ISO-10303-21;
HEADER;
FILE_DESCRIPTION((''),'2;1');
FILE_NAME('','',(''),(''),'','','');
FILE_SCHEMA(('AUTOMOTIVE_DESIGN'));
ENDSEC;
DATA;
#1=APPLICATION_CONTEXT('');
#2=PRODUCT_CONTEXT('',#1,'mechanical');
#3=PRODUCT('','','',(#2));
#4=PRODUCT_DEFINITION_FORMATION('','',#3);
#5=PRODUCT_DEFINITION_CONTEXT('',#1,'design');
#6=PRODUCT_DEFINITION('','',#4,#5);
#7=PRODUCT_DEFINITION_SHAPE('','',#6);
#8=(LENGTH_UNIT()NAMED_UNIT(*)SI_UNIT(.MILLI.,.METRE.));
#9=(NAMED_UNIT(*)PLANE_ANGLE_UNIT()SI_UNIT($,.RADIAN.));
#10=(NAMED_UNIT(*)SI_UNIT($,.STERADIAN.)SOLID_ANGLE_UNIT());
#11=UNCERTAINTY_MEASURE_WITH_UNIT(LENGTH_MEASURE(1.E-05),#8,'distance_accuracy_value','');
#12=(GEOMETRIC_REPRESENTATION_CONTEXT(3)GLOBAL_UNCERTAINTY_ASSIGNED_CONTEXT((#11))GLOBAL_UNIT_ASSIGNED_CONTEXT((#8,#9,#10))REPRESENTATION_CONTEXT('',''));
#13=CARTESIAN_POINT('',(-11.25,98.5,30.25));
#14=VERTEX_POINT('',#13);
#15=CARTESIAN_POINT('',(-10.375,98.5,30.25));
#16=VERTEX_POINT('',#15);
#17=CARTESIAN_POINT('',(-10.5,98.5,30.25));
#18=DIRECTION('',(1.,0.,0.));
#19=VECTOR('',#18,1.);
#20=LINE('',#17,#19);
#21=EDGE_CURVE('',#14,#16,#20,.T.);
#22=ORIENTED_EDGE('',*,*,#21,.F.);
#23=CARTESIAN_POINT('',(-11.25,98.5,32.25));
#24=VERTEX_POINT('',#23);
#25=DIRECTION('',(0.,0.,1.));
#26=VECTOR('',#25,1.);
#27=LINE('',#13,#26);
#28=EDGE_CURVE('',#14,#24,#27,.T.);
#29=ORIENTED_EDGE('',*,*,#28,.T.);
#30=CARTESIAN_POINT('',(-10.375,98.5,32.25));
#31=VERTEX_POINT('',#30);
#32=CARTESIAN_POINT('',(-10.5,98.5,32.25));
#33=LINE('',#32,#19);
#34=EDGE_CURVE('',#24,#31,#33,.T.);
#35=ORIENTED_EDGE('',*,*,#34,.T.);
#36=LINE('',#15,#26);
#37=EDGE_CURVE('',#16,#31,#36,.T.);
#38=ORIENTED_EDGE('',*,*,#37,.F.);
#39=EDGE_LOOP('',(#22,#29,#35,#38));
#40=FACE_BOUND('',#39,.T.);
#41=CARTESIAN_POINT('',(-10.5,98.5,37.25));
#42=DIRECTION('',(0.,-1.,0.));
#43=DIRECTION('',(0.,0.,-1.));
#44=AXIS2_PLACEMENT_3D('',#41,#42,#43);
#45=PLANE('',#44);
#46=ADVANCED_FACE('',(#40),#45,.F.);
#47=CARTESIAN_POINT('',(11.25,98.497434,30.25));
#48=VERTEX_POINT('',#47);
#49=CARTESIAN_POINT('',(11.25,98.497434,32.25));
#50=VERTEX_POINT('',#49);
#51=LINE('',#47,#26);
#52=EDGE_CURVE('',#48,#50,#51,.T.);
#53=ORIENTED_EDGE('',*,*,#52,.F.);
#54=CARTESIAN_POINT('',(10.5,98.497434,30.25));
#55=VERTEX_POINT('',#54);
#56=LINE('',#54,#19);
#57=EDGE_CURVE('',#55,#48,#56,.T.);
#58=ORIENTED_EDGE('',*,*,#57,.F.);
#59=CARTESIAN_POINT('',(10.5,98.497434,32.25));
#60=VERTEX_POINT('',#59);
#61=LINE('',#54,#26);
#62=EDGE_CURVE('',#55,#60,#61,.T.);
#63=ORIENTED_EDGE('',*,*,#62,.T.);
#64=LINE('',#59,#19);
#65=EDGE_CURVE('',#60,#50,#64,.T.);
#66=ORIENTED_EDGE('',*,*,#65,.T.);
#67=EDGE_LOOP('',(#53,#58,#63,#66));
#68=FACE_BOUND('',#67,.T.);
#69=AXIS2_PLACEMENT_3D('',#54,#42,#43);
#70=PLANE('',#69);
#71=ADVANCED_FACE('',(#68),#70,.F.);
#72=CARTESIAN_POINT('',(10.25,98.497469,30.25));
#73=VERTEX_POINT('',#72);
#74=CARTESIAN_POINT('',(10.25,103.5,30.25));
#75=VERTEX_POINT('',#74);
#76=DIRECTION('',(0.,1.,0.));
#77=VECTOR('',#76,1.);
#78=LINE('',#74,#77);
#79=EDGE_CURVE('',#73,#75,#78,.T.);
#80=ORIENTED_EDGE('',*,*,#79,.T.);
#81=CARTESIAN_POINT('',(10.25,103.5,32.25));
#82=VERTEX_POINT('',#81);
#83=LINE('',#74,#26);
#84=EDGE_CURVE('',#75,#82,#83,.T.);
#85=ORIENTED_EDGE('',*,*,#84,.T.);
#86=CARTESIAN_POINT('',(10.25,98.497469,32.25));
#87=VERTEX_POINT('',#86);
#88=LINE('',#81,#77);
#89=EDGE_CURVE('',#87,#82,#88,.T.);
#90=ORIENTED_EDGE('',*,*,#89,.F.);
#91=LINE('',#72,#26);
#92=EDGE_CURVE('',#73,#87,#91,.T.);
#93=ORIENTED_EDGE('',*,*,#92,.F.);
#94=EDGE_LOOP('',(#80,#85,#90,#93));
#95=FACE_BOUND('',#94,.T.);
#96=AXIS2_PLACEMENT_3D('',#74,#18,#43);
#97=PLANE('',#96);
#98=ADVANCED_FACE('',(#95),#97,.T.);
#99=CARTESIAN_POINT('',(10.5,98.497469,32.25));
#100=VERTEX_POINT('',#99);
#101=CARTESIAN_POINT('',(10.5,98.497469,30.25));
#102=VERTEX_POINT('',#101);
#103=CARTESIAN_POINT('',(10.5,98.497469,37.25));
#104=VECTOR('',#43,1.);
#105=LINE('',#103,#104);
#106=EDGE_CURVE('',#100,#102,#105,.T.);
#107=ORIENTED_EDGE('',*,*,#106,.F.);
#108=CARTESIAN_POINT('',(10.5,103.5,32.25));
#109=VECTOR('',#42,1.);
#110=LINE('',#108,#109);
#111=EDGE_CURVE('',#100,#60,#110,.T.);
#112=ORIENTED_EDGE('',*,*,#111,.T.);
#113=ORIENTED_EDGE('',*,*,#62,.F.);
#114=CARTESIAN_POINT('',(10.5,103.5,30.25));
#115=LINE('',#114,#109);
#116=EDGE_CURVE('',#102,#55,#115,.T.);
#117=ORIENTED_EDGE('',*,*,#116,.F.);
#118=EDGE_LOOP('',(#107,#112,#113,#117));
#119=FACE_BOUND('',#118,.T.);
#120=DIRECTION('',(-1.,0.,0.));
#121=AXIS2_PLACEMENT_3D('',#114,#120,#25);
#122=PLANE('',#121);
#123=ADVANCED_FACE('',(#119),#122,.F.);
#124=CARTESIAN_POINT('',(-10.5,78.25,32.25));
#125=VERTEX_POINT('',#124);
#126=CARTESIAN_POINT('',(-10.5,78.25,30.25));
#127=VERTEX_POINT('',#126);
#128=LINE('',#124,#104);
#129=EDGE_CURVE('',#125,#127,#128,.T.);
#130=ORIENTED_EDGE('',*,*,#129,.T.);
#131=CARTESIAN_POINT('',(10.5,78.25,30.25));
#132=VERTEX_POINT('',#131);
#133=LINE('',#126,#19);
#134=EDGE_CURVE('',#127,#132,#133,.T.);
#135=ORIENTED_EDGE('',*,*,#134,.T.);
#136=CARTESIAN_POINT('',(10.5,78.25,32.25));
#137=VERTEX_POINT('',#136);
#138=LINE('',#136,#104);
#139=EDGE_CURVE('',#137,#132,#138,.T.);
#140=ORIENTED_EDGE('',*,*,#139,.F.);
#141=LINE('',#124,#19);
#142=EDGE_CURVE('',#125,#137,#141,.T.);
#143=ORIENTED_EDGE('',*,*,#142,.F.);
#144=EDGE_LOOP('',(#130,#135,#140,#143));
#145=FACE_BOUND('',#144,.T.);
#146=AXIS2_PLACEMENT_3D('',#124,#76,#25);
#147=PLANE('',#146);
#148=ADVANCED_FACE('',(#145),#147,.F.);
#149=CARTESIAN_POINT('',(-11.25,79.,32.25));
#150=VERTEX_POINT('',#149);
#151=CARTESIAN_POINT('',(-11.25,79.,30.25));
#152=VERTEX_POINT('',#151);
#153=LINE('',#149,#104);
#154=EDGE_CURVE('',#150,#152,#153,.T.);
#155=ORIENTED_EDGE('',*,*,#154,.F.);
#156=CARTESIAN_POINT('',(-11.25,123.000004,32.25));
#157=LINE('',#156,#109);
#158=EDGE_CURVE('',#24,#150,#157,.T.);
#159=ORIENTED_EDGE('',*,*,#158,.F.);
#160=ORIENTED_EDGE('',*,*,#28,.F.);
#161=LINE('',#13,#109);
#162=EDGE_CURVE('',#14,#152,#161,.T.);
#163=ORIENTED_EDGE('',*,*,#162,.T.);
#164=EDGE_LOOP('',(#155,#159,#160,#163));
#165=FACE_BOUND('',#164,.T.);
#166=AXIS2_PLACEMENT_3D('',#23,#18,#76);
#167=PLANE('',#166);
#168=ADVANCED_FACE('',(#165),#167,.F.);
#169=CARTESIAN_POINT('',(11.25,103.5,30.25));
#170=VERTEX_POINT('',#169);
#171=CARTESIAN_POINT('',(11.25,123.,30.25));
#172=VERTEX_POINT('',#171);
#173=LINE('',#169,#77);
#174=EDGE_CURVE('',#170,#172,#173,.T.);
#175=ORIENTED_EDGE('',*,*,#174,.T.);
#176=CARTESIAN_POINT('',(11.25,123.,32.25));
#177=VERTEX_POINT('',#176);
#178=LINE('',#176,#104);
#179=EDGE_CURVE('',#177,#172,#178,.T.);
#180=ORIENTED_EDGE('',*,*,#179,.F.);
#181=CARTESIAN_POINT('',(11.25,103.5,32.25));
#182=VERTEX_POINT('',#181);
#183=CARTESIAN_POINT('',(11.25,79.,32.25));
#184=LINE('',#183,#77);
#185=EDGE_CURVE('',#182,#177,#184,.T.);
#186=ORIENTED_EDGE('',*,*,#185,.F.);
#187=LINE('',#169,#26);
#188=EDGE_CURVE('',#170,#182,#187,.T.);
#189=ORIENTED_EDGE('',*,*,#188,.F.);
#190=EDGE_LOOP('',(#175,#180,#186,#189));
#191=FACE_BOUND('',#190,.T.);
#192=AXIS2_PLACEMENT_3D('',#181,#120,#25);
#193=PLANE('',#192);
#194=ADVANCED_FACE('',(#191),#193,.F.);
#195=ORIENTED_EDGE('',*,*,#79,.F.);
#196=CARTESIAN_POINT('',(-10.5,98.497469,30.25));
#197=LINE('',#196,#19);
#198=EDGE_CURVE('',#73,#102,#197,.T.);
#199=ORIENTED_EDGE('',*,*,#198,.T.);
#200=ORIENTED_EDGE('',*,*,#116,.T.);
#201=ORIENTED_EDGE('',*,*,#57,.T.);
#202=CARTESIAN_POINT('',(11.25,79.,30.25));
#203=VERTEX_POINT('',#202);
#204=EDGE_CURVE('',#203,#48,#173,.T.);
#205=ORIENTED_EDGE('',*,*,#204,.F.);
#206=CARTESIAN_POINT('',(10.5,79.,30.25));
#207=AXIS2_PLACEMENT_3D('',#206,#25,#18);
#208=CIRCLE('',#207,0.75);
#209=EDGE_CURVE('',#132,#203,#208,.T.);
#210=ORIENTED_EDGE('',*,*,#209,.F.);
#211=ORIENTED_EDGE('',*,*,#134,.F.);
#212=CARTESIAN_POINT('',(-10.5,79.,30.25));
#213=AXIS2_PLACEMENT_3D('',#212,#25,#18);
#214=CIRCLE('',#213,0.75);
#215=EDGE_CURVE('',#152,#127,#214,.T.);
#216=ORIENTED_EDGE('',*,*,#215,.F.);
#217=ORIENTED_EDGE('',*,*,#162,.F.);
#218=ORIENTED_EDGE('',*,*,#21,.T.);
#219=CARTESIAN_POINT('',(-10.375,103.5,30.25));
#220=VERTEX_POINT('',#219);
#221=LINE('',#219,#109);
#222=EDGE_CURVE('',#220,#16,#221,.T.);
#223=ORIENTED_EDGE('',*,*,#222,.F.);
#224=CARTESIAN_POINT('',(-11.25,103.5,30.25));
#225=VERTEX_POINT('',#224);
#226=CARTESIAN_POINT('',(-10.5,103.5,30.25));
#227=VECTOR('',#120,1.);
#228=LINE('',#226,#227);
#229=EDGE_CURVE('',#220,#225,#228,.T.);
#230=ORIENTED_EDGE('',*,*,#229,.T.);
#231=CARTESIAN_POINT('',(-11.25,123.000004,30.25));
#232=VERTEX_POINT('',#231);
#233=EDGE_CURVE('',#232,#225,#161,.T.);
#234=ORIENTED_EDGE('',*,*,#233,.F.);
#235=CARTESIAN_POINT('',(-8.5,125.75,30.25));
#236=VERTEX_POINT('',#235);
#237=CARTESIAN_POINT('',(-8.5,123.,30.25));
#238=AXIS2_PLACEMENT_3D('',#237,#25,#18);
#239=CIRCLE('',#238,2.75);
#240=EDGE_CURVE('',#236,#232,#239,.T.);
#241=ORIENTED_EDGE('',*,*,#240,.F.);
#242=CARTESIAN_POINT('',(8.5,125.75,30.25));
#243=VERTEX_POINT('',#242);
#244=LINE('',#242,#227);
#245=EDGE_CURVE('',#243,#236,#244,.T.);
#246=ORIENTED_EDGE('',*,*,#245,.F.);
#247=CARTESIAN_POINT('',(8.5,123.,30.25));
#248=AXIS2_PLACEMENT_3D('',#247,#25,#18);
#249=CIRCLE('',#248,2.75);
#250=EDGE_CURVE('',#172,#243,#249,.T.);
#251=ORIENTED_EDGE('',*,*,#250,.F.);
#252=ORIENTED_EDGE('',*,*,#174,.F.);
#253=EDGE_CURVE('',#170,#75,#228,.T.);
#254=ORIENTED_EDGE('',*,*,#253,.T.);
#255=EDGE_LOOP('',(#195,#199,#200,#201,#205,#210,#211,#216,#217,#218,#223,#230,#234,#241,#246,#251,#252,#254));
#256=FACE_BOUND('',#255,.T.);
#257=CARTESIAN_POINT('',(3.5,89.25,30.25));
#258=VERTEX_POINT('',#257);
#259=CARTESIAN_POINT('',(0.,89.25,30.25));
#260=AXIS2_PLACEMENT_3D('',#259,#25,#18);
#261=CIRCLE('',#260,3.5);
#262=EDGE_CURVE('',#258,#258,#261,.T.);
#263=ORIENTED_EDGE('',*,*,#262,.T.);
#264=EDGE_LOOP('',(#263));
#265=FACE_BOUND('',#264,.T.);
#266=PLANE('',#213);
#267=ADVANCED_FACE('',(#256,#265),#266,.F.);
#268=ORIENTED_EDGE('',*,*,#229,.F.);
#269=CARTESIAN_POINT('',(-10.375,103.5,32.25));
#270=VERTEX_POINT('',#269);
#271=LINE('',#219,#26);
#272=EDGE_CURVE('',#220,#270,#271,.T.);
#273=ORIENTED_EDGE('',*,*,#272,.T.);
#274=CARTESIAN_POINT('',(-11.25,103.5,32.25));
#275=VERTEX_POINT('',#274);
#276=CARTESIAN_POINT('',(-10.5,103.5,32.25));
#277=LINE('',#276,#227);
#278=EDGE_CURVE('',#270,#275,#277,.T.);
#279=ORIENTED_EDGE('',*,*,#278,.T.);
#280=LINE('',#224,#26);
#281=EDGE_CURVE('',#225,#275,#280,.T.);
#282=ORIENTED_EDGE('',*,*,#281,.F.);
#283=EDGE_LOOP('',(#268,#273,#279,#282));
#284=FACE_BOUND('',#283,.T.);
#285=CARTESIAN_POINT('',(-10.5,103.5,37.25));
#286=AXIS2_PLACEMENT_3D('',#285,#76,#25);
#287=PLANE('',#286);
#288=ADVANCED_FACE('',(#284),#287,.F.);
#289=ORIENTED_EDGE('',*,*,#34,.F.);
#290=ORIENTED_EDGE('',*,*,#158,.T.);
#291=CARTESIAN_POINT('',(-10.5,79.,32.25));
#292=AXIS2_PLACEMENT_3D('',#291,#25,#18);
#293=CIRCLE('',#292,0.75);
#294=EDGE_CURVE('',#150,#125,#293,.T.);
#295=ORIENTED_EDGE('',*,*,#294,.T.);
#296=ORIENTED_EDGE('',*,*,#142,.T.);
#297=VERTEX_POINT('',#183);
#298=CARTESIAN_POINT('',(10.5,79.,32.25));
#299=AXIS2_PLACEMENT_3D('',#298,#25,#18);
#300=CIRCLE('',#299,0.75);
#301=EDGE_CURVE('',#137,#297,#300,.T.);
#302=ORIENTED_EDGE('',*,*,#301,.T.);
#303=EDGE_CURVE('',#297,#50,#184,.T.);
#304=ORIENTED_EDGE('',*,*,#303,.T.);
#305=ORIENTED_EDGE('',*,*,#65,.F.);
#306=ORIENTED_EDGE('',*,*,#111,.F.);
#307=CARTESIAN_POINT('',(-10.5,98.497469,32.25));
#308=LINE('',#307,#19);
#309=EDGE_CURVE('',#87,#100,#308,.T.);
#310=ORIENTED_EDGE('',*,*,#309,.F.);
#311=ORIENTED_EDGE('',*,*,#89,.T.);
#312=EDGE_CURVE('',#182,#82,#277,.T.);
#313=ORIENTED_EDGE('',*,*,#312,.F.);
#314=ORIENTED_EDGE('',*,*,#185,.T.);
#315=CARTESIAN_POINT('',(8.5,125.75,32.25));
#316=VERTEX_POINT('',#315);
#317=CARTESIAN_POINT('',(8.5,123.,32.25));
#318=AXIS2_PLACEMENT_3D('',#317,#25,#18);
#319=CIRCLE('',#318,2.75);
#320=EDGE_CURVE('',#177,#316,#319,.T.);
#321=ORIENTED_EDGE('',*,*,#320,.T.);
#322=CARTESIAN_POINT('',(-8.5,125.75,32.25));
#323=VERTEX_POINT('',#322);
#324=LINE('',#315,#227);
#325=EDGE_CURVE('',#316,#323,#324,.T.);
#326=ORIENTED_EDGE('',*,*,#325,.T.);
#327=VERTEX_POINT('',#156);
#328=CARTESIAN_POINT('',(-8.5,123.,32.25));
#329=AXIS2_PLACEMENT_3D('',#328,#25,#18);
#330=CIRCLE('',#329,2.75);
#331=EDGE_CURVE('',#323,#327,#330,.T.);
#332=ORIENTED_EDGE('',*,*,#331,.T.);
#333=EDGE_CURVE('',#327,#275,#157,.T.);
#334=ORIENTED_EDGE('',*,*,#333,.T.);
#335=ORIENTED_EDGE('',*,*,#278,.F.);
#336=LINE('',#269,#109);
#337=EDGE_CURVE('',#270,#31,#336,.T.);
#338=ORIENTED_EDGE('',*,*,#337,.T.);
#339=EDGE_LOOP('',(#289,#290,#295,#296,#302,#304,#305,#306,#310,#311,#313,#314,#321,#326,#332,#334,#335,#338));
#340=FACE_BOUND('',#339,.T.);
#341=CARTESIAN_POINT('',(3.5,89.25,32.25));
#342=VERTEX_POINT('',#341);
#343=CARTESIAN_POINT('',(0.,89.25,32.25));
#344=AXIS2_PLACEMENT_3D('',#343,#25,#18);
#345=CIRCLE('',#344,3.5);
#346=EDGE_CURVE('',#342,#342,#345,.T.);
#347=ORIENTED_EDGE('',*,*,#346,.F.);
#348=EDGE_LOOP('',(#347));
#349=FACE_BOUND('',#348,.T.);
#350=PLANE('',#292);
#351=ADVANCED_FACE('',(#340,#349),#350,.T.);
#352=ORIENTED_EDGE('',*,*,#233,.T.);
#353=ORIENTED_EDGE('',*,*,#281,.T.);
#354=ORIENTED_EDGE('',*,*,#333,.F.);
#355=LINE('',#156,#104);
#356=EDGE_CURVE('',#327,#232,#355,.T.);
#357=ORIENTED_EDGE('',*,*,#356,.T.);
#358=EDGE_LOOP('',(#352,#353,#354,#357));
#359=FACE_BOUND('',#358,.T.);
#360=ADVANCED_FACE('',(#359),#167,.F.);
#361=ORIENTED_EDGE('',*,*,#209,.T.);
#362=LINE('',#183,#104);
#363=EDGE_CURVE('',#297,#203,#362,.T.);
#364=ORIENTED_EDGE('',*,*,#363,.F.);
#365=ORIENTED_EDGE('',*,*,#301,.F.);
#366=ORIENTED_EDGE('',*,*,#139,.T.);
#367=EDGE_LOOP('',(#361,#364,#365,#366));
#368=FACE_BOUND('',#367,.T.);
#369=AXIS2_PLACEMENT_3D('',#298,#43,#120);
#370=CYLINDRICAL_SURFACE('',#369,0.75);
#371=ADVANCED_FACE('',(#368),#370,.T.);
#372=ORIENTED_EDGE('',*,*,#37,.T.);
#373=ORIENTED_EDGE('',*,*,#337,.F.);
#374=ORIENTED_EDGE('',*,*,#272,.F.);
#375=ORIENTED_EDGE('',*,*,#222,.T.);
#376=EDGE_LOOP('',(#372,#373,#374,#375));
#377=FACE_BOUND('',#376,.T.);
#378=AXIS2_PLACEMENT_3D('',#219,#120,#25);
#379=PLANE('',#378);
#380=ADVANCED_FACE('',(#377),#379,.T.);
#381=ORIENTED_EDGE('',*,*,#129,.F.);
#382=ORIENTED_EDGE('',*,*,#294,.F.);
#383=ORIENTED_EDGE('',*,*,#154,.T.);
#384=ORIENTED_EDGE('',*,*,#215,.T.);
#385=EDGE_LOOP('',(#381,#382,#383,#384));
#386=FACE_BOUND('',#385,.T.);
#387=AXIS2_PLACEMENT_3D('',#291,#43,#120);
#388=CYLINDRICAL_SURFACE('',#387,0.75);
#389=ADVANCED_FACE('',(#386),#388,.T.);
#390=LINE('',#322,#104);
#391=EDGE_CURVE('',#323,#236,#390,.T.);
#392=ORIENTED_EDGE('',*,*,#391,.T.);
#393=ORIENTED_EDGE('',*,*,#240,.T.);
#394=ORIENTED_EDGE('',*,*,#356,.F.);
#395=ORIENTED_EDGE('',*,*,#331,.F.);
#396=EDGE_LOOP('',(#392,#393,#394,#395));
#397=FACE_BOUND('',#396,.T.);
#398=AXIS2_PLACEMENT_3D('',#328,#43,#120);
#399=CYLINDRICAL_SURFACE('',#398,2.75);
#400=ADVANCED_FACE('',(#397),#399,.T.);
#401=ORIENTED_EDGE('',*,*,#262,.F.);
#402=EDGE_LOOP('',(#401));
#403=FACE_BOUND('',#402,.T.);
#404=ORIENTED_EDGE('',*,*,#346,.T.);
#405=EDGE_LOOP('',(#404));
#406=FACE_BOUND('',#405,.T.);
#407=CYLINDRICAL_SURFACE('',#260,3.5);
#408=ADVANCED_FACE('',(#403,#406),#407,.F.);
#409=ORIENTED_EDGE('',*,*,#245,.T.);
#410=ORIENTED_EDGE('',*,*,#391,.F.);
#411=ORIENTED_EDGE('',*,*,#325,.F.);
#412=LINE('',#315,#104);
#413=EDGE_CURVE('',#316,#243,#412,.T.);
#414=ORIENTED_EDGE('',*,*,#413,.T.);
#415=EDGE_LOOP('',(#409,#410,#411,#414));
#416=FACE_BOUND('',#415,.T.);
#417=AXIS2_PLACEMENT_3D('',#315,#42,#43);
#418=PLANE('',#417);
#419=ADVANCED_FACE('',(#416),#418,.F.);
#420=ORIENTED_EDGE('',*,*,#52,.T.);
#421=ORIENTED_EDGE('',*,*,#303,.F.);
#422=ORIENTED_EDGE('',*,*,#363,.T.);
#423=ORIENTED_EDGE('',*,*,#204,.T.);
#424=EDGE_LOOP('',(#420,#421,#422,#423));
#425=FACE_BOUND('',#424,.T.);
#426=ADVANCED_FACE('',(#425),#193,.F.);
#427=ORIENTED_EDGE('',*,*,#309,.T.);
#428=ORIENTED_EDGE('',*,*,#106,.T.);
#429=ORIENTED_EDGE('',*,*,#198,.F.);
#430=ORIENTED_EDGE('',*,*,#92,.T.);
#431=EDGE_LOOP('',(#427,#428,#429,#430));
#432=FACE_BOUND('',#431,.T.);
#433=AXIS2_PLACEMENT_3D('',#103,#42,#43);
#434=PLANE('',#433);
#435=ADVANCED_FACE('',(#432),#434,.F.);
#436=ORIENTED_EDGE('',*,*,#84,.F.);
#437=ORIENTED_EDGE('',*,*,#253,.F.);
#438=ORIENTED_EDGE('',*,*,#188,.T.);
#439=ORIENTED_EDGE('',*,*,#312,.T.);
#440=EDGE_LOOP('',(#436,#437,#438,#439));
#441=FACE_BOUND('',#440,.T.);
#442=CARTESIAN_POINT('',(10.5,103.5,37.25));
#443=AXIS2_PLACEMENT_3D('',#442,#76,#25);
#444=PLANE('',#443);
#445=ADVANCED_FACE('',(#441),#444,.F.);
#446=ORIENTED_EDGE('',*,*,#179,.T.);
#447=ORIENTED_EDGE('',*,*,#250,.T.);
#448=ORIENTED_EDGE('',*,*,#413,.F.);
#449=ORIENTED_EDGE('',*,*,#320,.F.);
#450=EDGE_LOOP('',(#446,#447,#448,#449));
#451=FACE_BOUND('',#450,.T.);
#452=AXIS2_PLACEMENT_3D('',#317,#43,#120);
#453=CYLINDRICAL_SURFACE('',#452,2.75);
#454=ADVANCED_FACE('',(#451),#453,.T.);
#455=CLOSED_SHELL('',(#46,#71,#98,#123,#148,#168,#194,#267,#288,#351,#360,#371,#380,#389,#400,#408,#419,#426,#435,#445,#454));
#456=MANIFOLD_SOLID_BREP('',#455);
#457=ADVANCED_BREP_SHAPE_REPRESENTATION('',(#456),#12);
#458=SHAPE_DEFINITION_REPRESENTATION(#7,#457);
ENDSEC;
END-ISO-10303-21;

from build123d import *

# Parameters (mm, degrees)
SKETCH1_W                = 20
SKETCH1_H                = 20
SKETCH1_R                = 4
SKETCH1_H_2              = 10
BOSS_EXTRUDE2_DEPTH      = 2
SKETCH2_W                = 45
SKETCH2_H                = 60
SKETCH2_W_2              = 43
SKETCH2_H_2              = 58
BOSS_EXTRUDE3_DEPTH      = 4
SKETCH6_W                = 45
SKETCH6_H                = 30
BOSS_EXTRUDE4_DEPTH      = 2
CUT_EXTRUDE4_DEPTH       = 4
BOSS_EXTRUDE5_DEPTH      = 7
BOSS_EXTRUDE5_2_DEPTH    = 7
BOSS_EXTRUDE5_3_DEPTH    = 7
SKETCH11_W               = 19
SKETCH11_H               = 19
BOSS_EXTRUDE6_DEPTH      = 2
SKETCH14_R               = 4
CUT_EXTRUDE7_DEPTH       = 19
SKETCH15_W               = 1
SKETCH15_H               = 17
SKETCH15_H_2             = 1
BOSS_EXTRUDE7_DEPTH      = 80
SKETCH16_W               = 16.5
SKETCH16_H               = 16.5
BOSS_EXTRUDE8_DEPTH      = 80
SKETCH17_R               = 4
CUT_EXTRUDE8_DEPTH       = 193
SKETCH18_W               = 105.72576136
SKETCH18_H               = 91
CUT_EXTRUDE9_DEPTH       = 193
SKETCH19_W               = 10.5
SKETCH19_H               = 2
CUT_EXTRUDE10_DEPTH      = 193
SKETCH20_W               = 16.5
SKETCH20_H               = 16.5
SKETCH20_R               = 4
BOSS_EXTRUDE10_DEPTH     = 80
SKETCH21_W               = 16.5
SKETCH21_H               = 16.5
SKETCH21_R               = 4
CUT_EXTRUDE11_DEPTH      = 80
SKETCH22_W               = 14
SKETCH22_H               = 5
CUT_EXTRUDE12_DEPTH      = 16
SKETCH24_W               = 16.5
SKETCH24_H               = 80
SKETCH24_W_2             = 14
SKETCH24_H_2             = 5
BOSS_EXTRUDE11_DEPTH     = 2
SKETCH25_R               = 4.1
SKETCH25_R_2             = 4
CUT_EXTRUDE14_DEPTH      = 103
SKETCH26_W               = 35
SKETCH26_H               = 40
BOSS_EXTRUDE12_DEPTH     = 5
SKETCH27_W               = 23
SKETCH27_H               = 5.75
CUT_EXTRUDE17_DEPTH      = 5
SKETCH28_W               = 2
SKETCH28_H               = 40
BOSS_EXTRUDE13_DEPTH     = 32
SKETCH29_W               = 4
SKETCH29_H               = 40
CUT_EXTRUDE18_DEPTH      = 32
SKETCH30_W               = 4
SKETCH30_H               = 40
CUT_EXTRUDE19_DEPTH      = 32
SKETCH31_W               = 10
SKETCH31_H               = 2
CUT_EXTRUDE20_DEPTH      = 32
SKETCH34_W               = 44.25
SKETCH34_H               = 2
BOSS_EXTRUDE15_DEPTH     = 23
FILLET1_R                = 3
FILLET2_R                = 3
FILLET3_R                = 3
FILLET4_R                = 3
BOSS_EXTRUDE16_DEPTH     = 20
SKETCH36_W               = 10
SKETCH36_H               = 2
BOSS_EXTRUDE17_DEPTH     = 23
SKETCH37_W               = 27
SKETCH37_H               = 20
CUT_EXTRUDE23_DEPTH      = 1
SKETCH42_W               = 1
SKETCH42_H               = 5
BOSS_EXTRUDE22_DEPTH     = 2
SKETCH44_W               = 1
SKETCH44_H               = 2
BOSS_EXTRUDE23_DEPTH     = 2
SKETCH46_W               = 1
SKETCH46_H               = 2
BOSS_EXTRUDE24_DEPTH     = 3
SKETCH47_W               = 16.5
SKETCH47_H               = 18.5
SKETCH47_R               = 4.1
BOSS_EXTRUDE25_DEPTH     = 2
SKETCH50_W               = 14
SKETCH50_H               = 18
SKETCH50_R               = 4.1
CUT_EXTRUDE26_DEPTH      = 2
SKETCH51_W               = 18
SKETCH51_H               = 7
CUT_EXTRUDE27_DEPTH      = 0.5
SKETCH52_W               = 18
SKETCH52_H               = 7
CUT_EXTRUDE28_DEPTH      = 0.5
SKETCH53_W               = 18.5
SKETCH53_H               = 82
BOSS_EXTRUDE26_DEPTH     = 0.5
SKETCH54_W               = 18.5
SKETCH54_H               = 82
BOSS_EXTRUDE27_DEPTH     = 0.5
BOSS_EXTRUDE30_DEPTH     = 5
CUT_EXTRUDE31_REACH      = 138.104
SKETCH61_W               = 23
SKETCH61_H               = 5
CUT_EXTRUDE32_DEPTH      = 25
CUT_EXTRUDE32_DEPTH_BACK = 5
SKETCH62_W               = 6.75
SKETCH62_H               = 5
BOSS_EXTRUDE31_DEPTH     = 10.25
BOSS_EXTRUDE32_DEPTH     = 6
SKETCH65_W               = 23
SKETCH65_H               = 2
BOSS_EXTRUDE33_DEPTH     = 6
FILLET5_R                = 3
FILLET6_R                = 3
FILLET7_R                = 1
FILLET8_R                = 1
SKETCH66_W               = 1
SKETCH66_H               = 1
CUT_EXTRUDE33_DEPTH      = 5
BOSS_EXTRUDE34_DEPTH     = 6
SKETCH68_W               = 17
SKETCH68_H               = 15
BOSS_EXTRUDE35_DEPTH     = 6
BOSS_EXTRUDE37_DEPTH     = 15
SKETCH72_W               = 3
SKETCH72_H               = 15
BOSS_EXTRUDE38_DEPTH     = 3
SKETCH75_W               = 6.5
SKETCH75_H               = 31.5
BOSS_EXTRUDE39_DEPTH     = 2
SKETCH76_W               = 6.5
SKETCH76_H               = 2
BOSS_EXTRUDE40_DEPTH     = 31.5
SKETCH77_W               = 1
SKETCH77_H               = 5.002530781
SKETCH77_H_2             = 5
CUT_EXTRUDE34_DEPTH      = 8
SKETCH78_W               = 0.75
SKETCH78_H               = 5.002565684
SKETCH78_H_2             = 5
CUT_EXTRUDE35_DEPTH      = 2
SKETCH79_W               = 0.75
SKETCH79_H               = 5.002530781
SKETCH79_W_2             = 0.875
SKETCH79_H_2             = 5
BOSS_EXTRUDE42_DEPTH     = 2
SKETCH80_R               = 3.5
CUT_EXTRUDE37_DEPTH      = 2
CUT_EXTRUDE38_DEPTH      = 32


with BuildPart() as part:
    # Sketch1 → Boss-Extrude2 (new body)
    # profile 1 of 6: a face of its own
    with BuildSketch(Plane(origin=(0, 0, 0), x_dir=(1, 0, 0), z_dir=(0, 1, 0))):
        Polygon((-22.5, 10), (-10, 10), (10, 10), (22.5, 10), (22.5, 70), (-22.5, 70), align=None)
    # profile 2 of 6: a face of its own
    with BuildSketch(Plane(origin=(0, 0, 0), x_dir=(1, 0, 0), z_dir=(0, 1, 0))):
        Polygon((-22.5, 10), (-10, -10), (-10, 10), align=None)
    # profile 3 of 6: a face of its own
    with BuildSketch(Plane(origin=(0, 0, 0), x_dir=(1, 0, 0), z_dir=(0, 1, 0))):
        Polygon((10, 10), (10, -10), (22.5, 10), align=None)
    # profile 4 of 6: a face of its own
    with BuildSketch(Plane(origin=(0, 0, 0), x_dir=(1, 0, 0), z_dir=(0, 1, 0))):
        Rectangle(SKETCH1_W, SKETCH1_H)
        Circle(SKETCH1_R, mode=Mode.SUBTRACT)
    # profile 5 of 6: a face of its own
    with BuildSketch(Plane(origin=(0, 0, 0), x_dir=(1, 0, 0), z_dir=(0, 1, 0))):
        Circle(SKETCH1_R)
    # profile 6 of 6: a face of its own
    with BuildSketch(Plane(origin=(0, 0, 0), x_dir=(1, 0, 0), z_dir=(0, 1, 0))):
        with Locations((0, -15)):
            Rectangle(SKETCH1_W, SKETCH1_H_2)
    extrude(amount=BOSS_EXTRUDE2_DEPTH)

    # Sketch2 → Boss-Extrude3 (add)
    with BuildSketch(Plane(origin=(0, 2, 0), x_dir=(1, 0, 0), z_dir=(0, 1, 0))):
        with Locations((0, 40)):
            Rectangle(SKETCH2_W, SKETCH2_H)
        with Locations((0, 40)):
            Rectangle(SKETCH2_W_2, SKETCH2_H_2, mode=Mode.SUBTRACT)
    extrude(amount=BOSS_EXTRUDE3_DEPTH)

    # Sketch6 → Boss-Extrude4 (add)
    with BuildSketch(Plane(origin=(0, 2, 0), x_dir=(1, 0, 0), z_dir=(0, 1, 0))):
        with Locations((0, -5)):
            Rectangle(SKETCH6_W, SKETCH6_H)
    extrude(amount=-BOSS_EXTRUDE4_DEPTH)

    # Sketch7 → Cut-Extrude4 (cut)
    with BuildSketch(Plane(origin=(0, 2, 0), x_dir=(1, 0, 0), z_dir=(0, 1, 0))):
        with BuildLine():
            Line((9.5, 9.5), (-9.5, 9.5))
            Line((-9.5, 9.5), (-9.5, 2.122498999))
            ThreePointArc((-9.5, 2.122498999), (0, 9), (9.5, 2.122498999))
            Line((9.5, 2.122498999), (9.5, 9.5))
        make_face()
        with BuildLine():
            ThreePointArc((-5.267826876, -9.5), (-7.858215886, -7.184532568), (-9.5, -4.122498999))
            Line((-9.5, -4.122498999), (-9.5, -9.5))
            Line((-9.5, -9.5), (-5.267826876, -9.5))
        make_face()
        with BuildLine():
            Line((9.5, -9.5), (9.5, -4.122498999))
            ThreePointArc((9.5, -4.122498999), (7.858215886, -7.184532568), (5.267826876, -9.5))
            Line((5.267826876, -9.5), (9.5, -9.5))
        make_face()
    extrude(amount=-CUT_EXTRUDE4_DEPTH, mode=Mode.SUBTRACT)


with BuildPart() as body_2:
    # Sketch8 → Boss-Extrude5 (new body)
    with BuildSketch(Plane(origin=(0, 2, 0), x_dir=(1, 0, 0), z_dir=(0, 1, 0))):
        with BuildLine():
            Line((9.5, 2.122498999), (9.5, 9.5))
            Line((9.5, 9.5), (-9.5, 9.5))
            Line((-9.5, 9.5), (-9.5, 2.122498999))
            ThreePointArc((-9.5, 2.122498999), (0, 9), (9.5, 2.122498999))
        make_face()
    extrude(amount=BOSS_EXTRUDE5_DEPTH)



with BuildPart() as body_3:
    # Sketch8 → Boss-Extrude5 2 (new body)
    with BuildSketch(Plane(origin=(0, 2, 0), x_dir=(1, 0, 0), z_dir=(0, 1, 0))):
        with BuildLine():
            Line((-9.5, -9.5), (-5.267826876, -9.5))
            ThreePointArc((-5.267826876, -9.5), (-7.858215886, -7.184532568), (-9.5, -4.122498999))
            Line((-9.5, -4.122498999), (-9.5, -9.5))
        make_face()
    extrude(amount=BOSS_EXTRUDE5_2_DEPTH)


with BuildPart() as body_4:
    # Sketch8 → Boss-Extrude5 3 (new body)
    with BuildSketch(Plane(origin=(0, 2, 0), x_dir=(1, 0, 0), z_dir=(0, 1, 0))):
        with BuildLine():
            Line((9.5, -9.5), (9.5, -4.122498999))
            ThreePointArc((9.5, -4.122498999), (7.858215886, -7.184532568), (5.267826876, -9.5))
            Line((5.267826876, -9.5), (9.5, -9.5))
        make_face()
    extrude(amount=BOSS_EXTRUDE5_3_DEPTH)


with BuildPart() as body_2_1:
    add(body_2.part)

    add(body_3.part)  # Boss-Extrude6 merges body 3

    add(body_4.part)  # Boss-Extrude6 merges body 4
    # Sketch11 → Boss-Extrude6 (add)
    with BuildSketch(Plane(origin=(0, 9, 0), x_dir=(1, 0, 0), z_dir=(0, 1, 0))):
        Rectangle(SKETCH11_W, SKETCH11_H)
    extrude(amount=BOSS_EXTRUDE6_DEPTH)


with BuildPart() as cut_extrude7_tool:
    # Sketch14 → Cut-Extrude7 (new body)
    with BuildSketch(Plane.XZ):
        with Locations(Location((0, 1, 0), (0, 0, 270))):
            Circle(SKETCH14_R)
    extrude(amount=-CUT_EXTRUDE7_DEPTH)


with BuildPart() as part_1:
    add(part.part)

    # Cut-Extrude7: cut by cut_extrude7_tool
    add(cut_extrude7_tool.part, mode=Mode.SUBTRACT)


with BuildPart() as body_2_2:
    add(body_2_1.part)

    # Cut-Extrude7: cut by cut_extrude7_tool
    add(cut_extrude7_tool.part, mode=Mode.SUBTRACT)

    # Sketch15 → Boss-Extrude7 (add)
    with BuildSketch(Plane(origin=(0, 11, 0), x_dir=(1, 0, 0), z_dir=(0, 1, 0))):
        Polygon((-8.5, 8.5), (8.5, 8.5), (8.5, 9.5), (-9.5, 9.5), (-9.5, -9.5), (8.5, -9.5), (8.5, -8.5), (-8.5, -8.5), align=None)
        with Locations((9, 0)):
            Rectangle(SKETCH15_W, SKETCH15_H)
        with Locations((9, 9)):
            Rectangle(SKETCH15_W, SKETCH15_H_2)
        with Locations((9, -9)):
            Rectangle(SKETCH15_W, SKETCH15_H_2)
    extrude(amount=BOSS_EXTRUDE7_DEPTH)


with BuildPart() as body_3_2:
    # Sketch16 → Boss-Extrude8 (new body)
    with BuildSketch(Plane(origin=(0, 91, 0), x_dir=(1, 0, 0), z_dir=(0, 1, 0))):
        Rectangle(SKETCH16_W, SKETCH16_H)
    extrude(amount=BOSS_EXTRUDE8_DEPTH)

    # Sketch17 → Cut-Extrude8 (cut)
    with BuildSketch(Plane.XZ):
        with Locations(Location((0, 1, 0), (0, 0, 270))):
            Circle(SKETCH17_R)
    extrude(amount=-CUT_EXTRUDE8_DEPTH, mode=Mode.SUBTRACT)

    # Sketch20 → Boss-Extrude10 (add)
    with BuildSketch(Plane.XZ.offset(-91)):
        Rectangle(SKETCH20_W, SKETCH20_H)
        with Locations(Location((0, 1, 0), (0, 0, 270))):
            Circle(SKETCH20_R, mode=Mode.SUBTRACT)
    extrude(amount=BOSS_EXTRUDE10_DEPTH)

    # Sketch21 → Cut-Extrude11 (cut)
    with BuildSketch(Plane(origin=(0, 171, 0), x_dir=(1, 0, 0), z_dir=(0, 1, 0))):
        Rectangle(SKETCH21_W, SKETCH21_H)
        with Locations(Location((0, -1, 0), (0, 0, 90))):
            Circle(SKETCH21_R, mode=Mode.SUBTRACT)
    extrude(amount=-CUT_EXTRUDE11_DEPTH, mode=Mode.SUBTRACT)

    # Sketch22 → Cut-Extrude12 (cut)
    with BuildSketch(Plane.XY.offset(8.25)):
        with Locations((0, 15.5)):
            Rectangle(SKETCH22_W, SKETCH22_H)
    extrude(amount=-CUT_EXTRUDE12_DEPTH, mode=Mode.SUBTRACT)

    # Sketch24 → Boss-Extrude11 (add)
    with BuildSketch(Plane.XY.offset(8.25)):
        with Locations((0, 51)):
            Rectangle(SKETCH24_W, SKETCH24_H)
        with Locations((0, 15.5)):
            Rectangle(SKETCH24_W_2, SKETCH24_H_2, mode=Mode.SUBTRACT)
    extrude(amount=BOSS_EXTRUDE11_DEPTH)

    # Sketch25 → Cut-Extrude14 (cut)
    with BuildSketch(Plane(origin=(0, 91, 0), x_dir=(1, 0, 0), z_dir=(0, 1, 0))):
        with Locations(Location((0, -1, 0), (0, 0, 270))):
            Circle(SKETCH25_R)
        with Locations((0, -1)):
            Circle(SKETCH25_R_2, mode=Mode.SUBTRACT)
    extrude(amount=-CUT_EXTRUDE14_DEPTH, mode=Mode.SUBTRACT)

    # Sketch26 → Boss-Extrude12 (add)
    with BuildSketch(Plane(origin=(0, 91, 0), x_dir=(1, 0, 0), z_dir=(0, 1, 0))):
        Rectangle(SKETCH26_W, SKETCH26_H)
    extrude(amount=BOSS_EXTRUDE12_DEPTH)

    # Sketch27 → Cut-Extrude17 (cut)
    with BuildSketch(Plane(origin=(0, 96, 0), x_dir=(1, 0, 0), z_dir=(0, 1, 0))):
        with Locations((0, -17.125)):
            Rectangle(SKETCH27_W, SKETCH27_H)
    extrude(amount=-CUT_EXTRUDE17_DEPTH, mode=Mode.SUBTRACT)

    # Sketch28 → Boss-Extrude13 (add)
    with BuildSketch(Plane(origin=(0, 96, 0), x_dir=(1, 0, 0), z_dir=(0, 1, 0))):
        with Locations((12.5, 0)):
            Rectangle(SKETCH28_W, SKETCH28_H)
        with Locations((-12.5, 0)):
            Rectangle(SKETCH28_W, SKETCH28_H)
    extrude(amount=BOSS_EXTRUDE13_DEPTH)

    # Sketch29 → Cut-Extrude18 (cut)
    with BuildSketch(Plane(origin=(0, 96, 0), x_dir=(1, 0, 0), z_dir=(0, 1, 0))):
        with Locations((-15.5, 0)):
            Rectangle(SKETCH29_W, SKETCH29_H)
    extrude(amount=-CUT_EXTRUDE18_DEPTH, mode=Mode.SUBTRACT)

    # Sketch30 → Cut-Extrude19 (cut)
    with BuildSketch(Plane(origin=(0, 96, 0), x_dir=(1, 0, 0), z_dir=(0, 1, 0))):
        with Locations((15.5, 0)):
            Rectangle(SKETCH30_W, SKETCH30_H)
    extrude(amount=-CUT_EXTRUDE19_DEPTH, mode=Mode.SUBTRACT)

    # Sketch31 → Cut-Extrude20 (cut)
    with BuildSketch(Plane(origin=(0, 96, 0), x_dir=(1, 0, 0), z_dir=(0, 1, 0))):
        with Locations((0, 19)):
            Rectangle(SKETCH31_W, SKETCH31_H)
    extrude(amount=-CUT_EXTRUDE20_DEPTH, mode=Mode.SUBTRACT)

    # Sketch34 → Boss-Extrude15 (add)
    with BuildSketch(Plane.ZY.offset(-11.5)):
        with Locations((2.125, 127)):
            Rectangle(SKETCH34_W, SKETCH34_H)
    extrude(amount=BOSS_EXTRUDE15_DEPTH)

    # Fillet1
    fillet1_edges = [body_3_2.edges().sort_by_distance(p)[0] for p in [
        (-13.5, 128, 0),
    ]]
    fillet(fillet1_edges, radius=FILLET1_R)

    # Fillet2
    fillet2_edges = [body_3_2.edges().sort_by_distance(p)[0] for p in [
        (13.5, 128, 0),
    ]]
    fillet(fillet2_edges, radius=FILLET2_R)

    # Fillet3
    # the kernel refuses this fillet: 3 mm, written as the material it adds along each edge
    with BuildSketch(Plane(origin=(-11.5, 126, 27.5), x_dir=(1, 0, 0), z_dir=(0, 0, -1))) as fillet3_piece_1_section:
        with BuildLine():
            CenterArc((FILLET3_R, FILLET3_R), FILLET3_R, 180, 90)
            Line((0, FILLET3_R), (0, 0))
            Line((0, 0), (FILLET3_R, 0))
        make_face()
    fillet3_piece_1 = extrude(amount=47.5, mode=Mode.PRIVATE)
    fillet3_piece_1 = split(fillet3_piece_1, bisect_by=Plane(origin=(-11.5, 126, 24.25), z_dir=(0, 0, -1)), keep=Keep.TOP, mode=Mode.PRIVATE)
    fillet3_piece_1 = split(fillet3_piece_1, bisect_by=Plane(origin=(-11.5, 126, 27.5), z_dir=(1, 0, 0)), keep=Keep.TOP, mode=Mode.PRIVATE)
    fillet3_piece_1 = split(fillet3_piece_1, bisect_by=Plane(origin=(-11.5, 126, 20), z_dir=(0, 0, 1)), keep=Keep.TOP, mode=Mode.PRIVATE)
    add(fillet3_piece_1)
    with BuildSketch(Plane(origin=(-11.5, 126, 20), x_dir=(1, 0, 0), z_dir=(0, 0, -1))) as fillet3_piece_2_section:
        with BuildLine():
            CenterArc((FILLET3_R, FILLET3_R), FILLET3_R, 180, 90)
            Line((0, FILLET3_R), (0, 0))
            Line((0, 0), (FILLET3_R, 0))
        make_face()
    fillet3_piece_2 = extrude(amount=40, mode=Mode.PRIVATE)
    fillet3_piece_2 = split(fillet3_piece_2, bisect_by=Plane(origin=(-11.5, 126, 20), z_dir=(1, 0, 0)), keep=Keep.TOP, mode=Mode.PRIVATE)
    add(fillet3_piece_2)

    # Fillet4
    # the kernel refuses this fillet: 3 mm, written as the material it adds along each edge
    with BuildSketch(Plane(origin=(11.5, 126, 27.5), x_dir=(0, -1, 0), z_dir=(0, 0, -1))) as fillet4_piece_1_section:
        with BuildLine():
            CenterArc((FILLET4_R, FILLET4_R), FILLET4_R, 180, 90)
            Line((0, FILLET4_R), (0, 0))
            Line((0, 0), (FILLET4_R, 0))
        make_face()
    fillet4_piece_1 = extrude(amount=47.5, mode=Mode.PRIVATE)
    fillet4_piece_1 = split(fillet4_piece_1, bisect_by=Plane(origin=(11.5, 126, 20), z_dir=(0, 0, 1)), keep=Keep.TOP, mode=Mode.PRIVATE)
    fillet4_piece_1 = split(fillet4_piece_1, bisect_by=Plane(origin=(11.5, 126, 27.5), z_dir=(-1, 0, 0)), keep=Keep.TOP, mode=Mode.PRIVATE)
    fillet4_piece_1 = split(fillet4_piece_1, bisect_by=Plane(origin=(11.5, 126, 24.25), z_dir=(0, 0, -1)), keep=Keep.TOP, mode=Mode.PRIVATE)
    add(fillet4_piece_1)
    with BuildSketch(Plane(origin=(11.5, 126, 20), x_dir=(0, -1, 0), z_dir=(0, 0, -1))) as fillet4_piece_2_section:
        with BuildLine():
            CenterArc((FILLET4_R, FILLET4_R), FILLET4_R, 180, 90)
            Line((0, FILLET4_R), (0, 0))
            Line((0, 0), (FILLET4_R, 0))
        make_face()
    fillet4_piece_2 = extrude(amount=40, mode=Mode.PRIVATE)
    fillet4_piece_2 = split(fillet4_piece_2, bisect_by=Plane(origin=(11.5, 126, 20), z_dir=(-1, 0, 0)), keep=Keep.TOP, mode=Mode.PRIVATE)
    add(fillet4_piece_2)

    # Boss-Extrude16: read off the stored shape, not the designer's step
    # Boss-Extrude16 outline → Boss-Extrude16 (add)
    with BuildSketch(Plane.XZ.offset(-91)):
        Polygon((11.5, 20), (11.5, 14.25), (-11.5, 14.25), (-11.5, 20), (-13.5, 20), (-13.5, 12.25), (13.5, 12.25), (13.5, 20), align=None)
    extrude(amount=BOSS_EXTRUDE16_DEPTH)

    # Sketch36 → Boss-Extrude17 (add)
    with BuildSketch(Plane.ZY.offset(-11.5)):
        with Locations((19.25, 72)):
            Rectangle(SKETCH36_W, SKETCH36_H)
    extrude(amount=BOSS_EXTRUDE17_DEPTH)

    # Sketch37 → Cut-Extrude23 (cut)
    with BuildSketch(Plane(origin=(0, 0, 12.25), x_dir=(-1, 0, 0), z_dir=(0, 0, -1))):
        with Locations((0, 81)):
            Rectangle(SKETCH37_W, SKETCH37_H)
    extrude(amount=-CUT_EXTRUDE23_DEPTH, mode=Mode.SUBTRACT)

    # Sketch47 → Boss-Extrude25 (add)
    with BuildSketch(Plane.XZ.offset(-11)):
        with Locations((0, 1)):
            Rectangle(SKETCH47_W, SKETCH47_H)
        with Locations(Location((0, 1, 0), (0, 0, 90))):
            Circle(SKETCH47_R, mode=Mode.SUBTRACT)
    extrude(amount=BOSS_EXTRUDE25_DEPTH)

    # Sketch50 → Cut-Extrude26 (cut)
    with BuildSketch(Plane(origin=(0, 13, 0), x_dir=(1, 0, 0), z_dir=(0, 1, 0))):
        with Locations((0, -1.25)):
            Rectangle(SKETCH50_W, SKETCH50_H)
        with Locations(Location((0, -1, 0), (0, 0, 270))):
            Circle(SKETCH50_R, mode=Mode.SUBTRACT)
    extrude(amount=-CUT_EXTRUDE26_DEPTH, mode=Mode.SUBTRACT)

    # Sketch51 → Cut-Extrude27 (cut)
    with BuildSketch(Plane(origin=(-7, 0, 0), x_dir=(0, 0, -1), z_dir=(1, 0, 0))):
        with Locations((-1.25, 14.5)):
            Rectangle(SKETCH51_W, SKETCH51_H)
    extrude(amount=-CUT_EXTRUDE27_DEPTH, mode=Mode.SUBTRACT)

    # Sketch52 → Cut-Extrude28 (cut)
    with BuildSketch(Plane.ZY.offset(-7)):
        with Locations((1.25, 14.5)):
            Rectangle(SKETCH52_W, SKETCH52_H)
    extrude(amount=-CUT_EXTRUDE28_DEPTH, mode=Mode.SUBTRACT)

    # Sketch53 → Boss-Extrude26 (add)
    with BuildSketch(Plane.ZY.offset(8.25)):
        with Locations((1, 50)):
            Rectangle(SKETCH53_W, SKETCH53_H)
    extrude(amount=BOSS_EXTRUDE26_DEPTH)

    # Sketch54 → Boss-Extrude27 (add)
    with BuildSketch(Plane(origin=(8.25, 0, 0), x_dir=(0, 0, -1), z_dir=(1, 0, 0))):
        with Locations((-1, 50)):
            Rectangle(SKETCH54_W, SKETCH54_H)
    extrude(amount=BOSS_EXTRUDE27_DEPTH)

    # Sketch59 → Boss-Extrude30 (add)
    with BuildSketch(Plane(origin=(0, 73, 0), x_dir=(1, 0, 0), z_dir=(0, 1, 0))):
        Polygon((-11.5, -20), (-11.5, -24.25), (11.5, -24.25), (11.5, -20), (11.5, -14.25), (-11.5, -14.25), align=None)
    extrude(amount=BOSS_EXTRUDE30_DEPTH)

    # Cut-Extrude31: up to this face of the body (flat: up to its plane)
    cut_extrude31_end = Plane(body_3_2.part.faces().sort_by_distance((0, 81, 13.25))[0])
    # Sketch61 → Cut-Extrude31 (cut, up to the picked face)
    with BuildSketch(Plane.XY.offset(24.25), mode=Mode.PRIVATE) as cut_extrude31_sk1:
        with Locations((0, 73.5)):
            Rectangle(SKETCH61_W, SKETCH61_H)
    cut_extrude31_tool1 = split(extrude(cut_extrude31_sk1.sketch, amount=-CUT_EXTRUDE31_REACH, mode=Mode.PRIVATE), bisect_by=cut_extrude31_end, keep=Keep.BOTH, mode=Mode.PRIVATE)
    add(cut_extrude31_tool1.solids().sort_by(Axis((0, 73.5, 24.25), (0, 0, -1)))[0], mode=Mode.SUBTRACT)

    # Sketch62 → Cut-Extrude32 (cut, two sides: drawn at the far end of the back side and taken through both)
    with BuildSketch(Plane(origin=(-11.5, 0, 0), x_dir=(0, 0, -1), z_dir=(1, 0, 0)).offset(-CUT_EXTRUDE32_DEPTH_BACK)):
        with Locations((-16.625, 73.5)):
            Rectangle(SKETCH62_W, SKETCH62_H)
    extrude(amount=CUT_EXTRUDE32_DEPTH + CUT_EXTRUDE32_DEPTH_BACK, mode=Mode.SUBTRACT)



with BuildPart() as cut_extrude9_tool:
    # Sketch18 → Cut-Extrude9 (new body)
    with BuildSketch(Plane.ZY.offset(22.5)):
        with Locations((-43.36288068, 45.5)):
            Rectangle(SKETCH18_W, SKETCH18_H)
    extrude(amount=-CUT_EXTRUDE9_DEPTH)


with BuildPart() as part_2:
    add(part_1.part)

    # Cut-Extrude9: cut by cut_extrude9_tool
    add(cut_extrude9_tool.part, mode=Mode.SUBTRACT)

    # Sketch19 → Cut-Extrude10 (cut)
    with BuildSketch(Plane.ZY.offset(22.5)):
        with Locations((14.75, 1)):
            Rectangle(SKETCH19_W, SKETCH19_H)
    extrude(amount=-CUT_EXTRUDE10_DEPTH, mode=Mode.SUBTRACT)


with BuildPart() as body_2_3:
    add(body_2_2.part)

    # Cut-Extrude9: cut by cut_extrude9_tool
    add(cut_extrude9_tool.part, mode=Mode.SUBTRACT)


with BuildPart() as body_2_2_1:
    # Sketch42 → Boss-Extrude22 (new body)
    with BuildSketch(Plane.XY.offset(30.25)):
        with Locations((-11, 101)):
            Rectangle(SKETCH42_W, SKETCH42_H)
    extrude(amount=-BOSS_EXTRUDE22_DEPTH)


with BuildPart() as body_3_3:
    # Sketch44 → Boss-Extrude23 (new body)
    with BuildSketch(Plane.XY.offset(30.25)):
        with Locations((11, 99.5)):
            Rectangle(SKETCH44_W, SKETCH44_H)
    extrude(amount=-BOSS_EXTRUDE23_DEPTH)

    # Sketch46 → Boss-Extrude24 (add)
    with BuildSketch(Plane(origin=(0, 100.5, 0), x_dir=(1, 0, 0), z_dir=(0, 1, 0))):
        with Locations((11, -29.25)):
            Rectangle(SKETCH46_W, SKETCH46_H)
    extrude(amount=BOSS_EXTRUDE24_DEPTH)


with BuildPart() as body_3_2_1:
    add(body_3_2.part)

    add(body_2_2_1.part)  # Boss-Extrude31 merges body 2 2

    add(body_3_3.part)  # Boss-Extrude31 merges body 3 3
    # Sketch63 → Boss-Extrude31 (add)
    with BuildSketch(Plane.XY.offset(20)):
        with BuildLine():
            Line((-13.5, 76), (-11.5, 76))
            Line((-11.5, 76), (-11.5, 78))
            Line((-11.5, 78), (-11.5, 123))
            Line((-11.5, 123), (-11.5, 127.828427125))
            ThreePointArc((-11.5, 127.828427125), (-12.949489743, 126.732050808), (-13.5, 125))
            Line((-13.5, 125), (-13.5, 76))
        make_face()
        with BuildLine():
            Line((11.5, 76), (13.5, 76))
            Line((13.5, 76), (13.5, 125))
            ThreePointArc((13.5, 125), (12.949489743, 126.732050808), (11.5, 127.828427125))
            Line((11.5, 127.828427125), (11.5, 123))
            Line((11.5, 123), (11.5, 78))
            Line((11.5, 78), (11.5, 76))
        make_face()
    extrude(amount=BOSS_EXTRUDE31_DEPTH)


with BuildPart() as boss_extrude32_tool:
    # Sketch64 → Boss-Extrude32 (new body)
    with BuildSketch(Plane.XY.offset(24.25)):
        with BuildLine():
            Line((11.5, 123.000004494), (11.5, 127.828427125))
            ThreePointArc((11.5, 127.828427125), (11.007305936, 127.956795679), (10.5, 128))
            Line((10.5, 128), (-10.5, 128))
            ThreePointArc((-10.5, 128), (-11.007305936, 127.956795679), (-11.5, 127.828427125))
            Line((-11.5, 127.828427125), (-11.5, 123.000004494))
            ThreePointArc((-11.5, 123.000004494), (-10.621318755, 125.121321932), (-8.5, 126))
            Line((-8.5, 126), (8.5, 126))
            ThreePointArc((8.5, 126), (10.621318755, 125.121321932), (11.5, 123.000004494))
        make_face()
    extrude(amount=BOSS_EXTRUDE32_DEPTH)


with BuildPart() as body_3_2_2:
    add(body_3_2_1.part)


with BuildPart() as body_3_2_3:
    # Boss-Extrude32: joined with boss_extrude32_tool
    add(body_3_2_2.part.fuse(boss_extrude32_tool.part, tol=0.00001))

    # Sketch65 → Boss-Extrude33 (add)
    with BuildSketch(Plane.XY.offset(24.25)):
        with Locations((0, 77)):
            Rectangle(SKETCH65_W, SKETCH65_H)
    extrude(amount=BOSS_EXTRUDE33_DEPTH)

    # Fillet5
    fillet5_edges = [body_3_2_3.edges().sort_by_distance(p)[0] for p in [
        (13.5, 76, 21.75),
    ]]
    fillet(fillet5_edges, radius=FILLET5_R)

    # Fillet6
    fillet6_edges = [body_3_2_3.edges().sort_by_distance(p)[0] for p in [
        (-13.5, 76, 21.75),
    ]]
    fillet(fillet6_edges, radius=FILLET6_R)

    # Fillet7
    fillet7_edges = [body_3_2_3.edges().sort_by_distance(p)[0] for p in [
        (-11.5, 78, 22.25),
    ]]
    fillet(fillet7_edges, radius=FILLET7_R)

    # Fillet8
    fillet8_edges = [body_3_2_3.edges().sort_by_distance(p)[0] for p in [
        (11.5, 78, 22.25),
    ]]
    fillet(fillet8_edges, radius=FILLET8_R)

    # Sketch66 → Cut-Extrude33 (cut)
    with BuildSketch(Plane(origin=(0, 103.5, 0), x_dir=(1, 0, 0), z_dir=(0, 1, 0))):
        with Locations((-11, -28.75)):
            Rectangle(SKETCH66_W, SKETCH66_H)
        Polygon((-10.5, -29.25), (-10.5, -30.25), (-11.5, -30.25), align=None)
        Polygon((11.5, -30.25), (10.5, -29.25), (10.5, -30.25), align=None)
        with Locations((11, -28.75)):
            Rectangle(SKETCH66_W, SKETCH66_H)
    extrude(amount=-CUT_EXTRUDE33_DEPTH, mode=Mode.SUBTRACT)

    # Sketch67 → Boss-Extrude34 (add)
    with BuildSketch(Plane(origin=(0, 96, 0), x_dir=(1, 0, 0), z_dir=(0, 1, 0))):
        Polygon((5, 5), (5, 18), (-5, 18), (-5, 20), (-11.5, 20), (-11.5, 5), align=None)
        Polygon((11.5, 20), (5, 20), (5, 18), (5, 5), (11.5, 5), align=None)
    extrude(amount=BOSS_EXTRUDE34_DEPTH)

    # Sketch68 → Boss-Extrude35 (add)
    with BuildSketch(Plane.XZ.offset(-126)):
        with Locations((0, -12.5)):
            Rectangle(SKETCH68_W, SKETCH68_H)
    extrude(amount=BOSS_EXTRUDE35_DEPTH)

    # Sketch71 → Boss-Extrude37 (add)
    with BuildSketch(Plane(origin=(0, 0, -20), x_dir=(-1, 0, 0), z_dir=(0, 0, -1))):
        with BuildLine():
            ThreePointArc((-8.5, 126), (-10.621320344, 125.121320344), (-11.5, 123))
            Line((-11.5, 123), (-8.5, 123))
            Line((-8.5, 123), (-8.5, 126))
        make_face()
        with BuildLine():
            Line((8.5, 123), (11.5, 123))
            ThreePointArc((11.5, 123), (10.621320344, 125.121320344), (8.5, 126))
            Line((8.5, 126), (8.5, 123))
        make_face()
    extrude(amount=-BOSS_EXTRUDE37_DEPTH)

    # Sketch72 → Boss-Extrude38 (add)
    with BuildSketch(Plane.XZ.offset(-123)):
        with Locations((-10, -12.5)):
            Rectangle(SKETCH72_W, SKETCH72_H)
        with Locations((10, -12.5)):
            Rectangle(SKETCH72_W, SKETCH72_H)
    extrude(amount=BOSS_EXTRUDE38_DEPTH)

    # Sketch81 → Cut-Extrude38 (cut)
    with BuildSketch(Plane(origin=(13.5, 0, 0), x_dir=(0, 0, -1), z_dir=(1, 0, 0))):
        Polygon((-30.25, 162.009758307), (-30.25, 125), (20, 125), (70.52683885, 125), (70.52683885, 162.009758307), align=None)
        Polygon((20, 125), (-30.25, 125), (-30.25, 79), (-13.25, 79), (-13.25, 91), (20, 91), align=None)
        Polygon((70.52683885, 125), (20, 125), (20, 91), (-13.25, 91), (-13.25, 79), (-30.25, 79), (-30.25, -38.82202192), (71.500818081, -38.82202192), (71.500818081, 125), align=None)
    extrude(amount=-CUT_EXTRUDE38_DEPTH, mode=Mode.SUBTRACT)


with BuildPart() as body_2_3_1:
    # Sketch75 → Boss-Extrude39 (new body)
    with BuildSketch(Plane.XY.offset(30.25)):
        with BuildLine():
            Line((-10.5, 78.25), (10.5, 78.25))
            ThreePointArc((10.5, 78.25), (11.030330086, 78.469669914), (11.25, 79))
            Line((11.25, 79), (11.25, 98.5))
            Line((11.25, 98.5), (11.25, 103.5))
            Line((11.25, 103.5), (11.25, 123))
            ThreePointArc((11.25, 123), (10.444543648, 124.944543648), (8.5, 125.75))
            Line((8.5, 125.75), (-8.5, 125.75))
            ThreePointArc((-8.5, 125.75), (-10.444542192, 124.944545105), (-11.25, 123.000004119))
            Line((-11.25, 123.000004119), (-11.25, 103.5))
            Line((-11.25, 103.5), (-11.25, 98.5))
            Line((-11.25, 98.5), (-11.25, 79))
            ThreePointArc((-11.25, 79), (-11.030330086, 78.469669914), (-10.5, 78.25))
        make_face()
        with Locations((0, 102)):
            Rectangle(SKETCH75_W, SKETCH75_H, mode=Mode.SUBTRACT)
    extrude(amount=BOSS_EXTRUDE39_DEPTH)

    # Sketch76 → Boss-Extrude40 (add)
    with BuildSketch(Plane(origin=(0, 86.25, 0), x_dir=(1, 0, 0), z_dir=(0, 1, 0))):
        with Locations((0, -31.25)):
            Rectangle(SKETCH76_W, SKETCH76_H)
    extrude(amount=BOSS_EXTRUDE40_DEPTH)

    # Sketch77 → Cut-Extrude34 (cut)
    with BuildSketch(Plane(origin=(0, 0, 29.25), x_dir=(-1, 0, 0), z_dir=(0, 0, -1))):
        with Locations((-10, 100.99873461)):
            Rectangle(SKETCH77_W, SKETCH77_H)
        with Locations((10, 101)):
            Rectangle(SKETCH77_W, SKETCH77_H_2)
    extrude(amount=-CUT_EXTRUDE34_DEPTH, mode=Mode.SUBTRACT)

    # Sketch78 → Cut-Extrude35 (cut)
    with BuildSketch(Plane.XY.offset(32.25)):
        with Locations((10.875, 100.998717158)):
            Rectangle(SKETCH78_W, SKETCH78_H)
        with Locations((-10.875, 101)):
            Rectangle(SKETCH78_W, SKETCH78_H_2)
    extrude(amount=-CUT_EXTRUDE35_DEPTH, mode=Mode.SUBTRACT)

    # Sketch79 → Boss-Extrude42 (add)
    with BuildSketch(Plane.XY.offset(32.25)):
        with Locations((9.875, 100.99873461)):
            Rectangle(SKETCH79_W, SKETCH79_H)
        with Locations((-9.9375, 101)):
            Rectangle(SKETCH79_W_2, SKETCH79_H_2)
    extrude(amount=-BOSS_EXTRUDE42_DEPTH)

    # Sketch80 → Cut-Extrude37 (cut)
    with BuildSketch(Plane.XY.offset(32.25)):
        with Locations((0, 89.25)):
            Circle(SKETCH80_R)
    extrude(amount=-CUT_EXTRUDE37_DEPTH, mode=Mode.SUBTRACT)


solid = body_2_3_1.part
